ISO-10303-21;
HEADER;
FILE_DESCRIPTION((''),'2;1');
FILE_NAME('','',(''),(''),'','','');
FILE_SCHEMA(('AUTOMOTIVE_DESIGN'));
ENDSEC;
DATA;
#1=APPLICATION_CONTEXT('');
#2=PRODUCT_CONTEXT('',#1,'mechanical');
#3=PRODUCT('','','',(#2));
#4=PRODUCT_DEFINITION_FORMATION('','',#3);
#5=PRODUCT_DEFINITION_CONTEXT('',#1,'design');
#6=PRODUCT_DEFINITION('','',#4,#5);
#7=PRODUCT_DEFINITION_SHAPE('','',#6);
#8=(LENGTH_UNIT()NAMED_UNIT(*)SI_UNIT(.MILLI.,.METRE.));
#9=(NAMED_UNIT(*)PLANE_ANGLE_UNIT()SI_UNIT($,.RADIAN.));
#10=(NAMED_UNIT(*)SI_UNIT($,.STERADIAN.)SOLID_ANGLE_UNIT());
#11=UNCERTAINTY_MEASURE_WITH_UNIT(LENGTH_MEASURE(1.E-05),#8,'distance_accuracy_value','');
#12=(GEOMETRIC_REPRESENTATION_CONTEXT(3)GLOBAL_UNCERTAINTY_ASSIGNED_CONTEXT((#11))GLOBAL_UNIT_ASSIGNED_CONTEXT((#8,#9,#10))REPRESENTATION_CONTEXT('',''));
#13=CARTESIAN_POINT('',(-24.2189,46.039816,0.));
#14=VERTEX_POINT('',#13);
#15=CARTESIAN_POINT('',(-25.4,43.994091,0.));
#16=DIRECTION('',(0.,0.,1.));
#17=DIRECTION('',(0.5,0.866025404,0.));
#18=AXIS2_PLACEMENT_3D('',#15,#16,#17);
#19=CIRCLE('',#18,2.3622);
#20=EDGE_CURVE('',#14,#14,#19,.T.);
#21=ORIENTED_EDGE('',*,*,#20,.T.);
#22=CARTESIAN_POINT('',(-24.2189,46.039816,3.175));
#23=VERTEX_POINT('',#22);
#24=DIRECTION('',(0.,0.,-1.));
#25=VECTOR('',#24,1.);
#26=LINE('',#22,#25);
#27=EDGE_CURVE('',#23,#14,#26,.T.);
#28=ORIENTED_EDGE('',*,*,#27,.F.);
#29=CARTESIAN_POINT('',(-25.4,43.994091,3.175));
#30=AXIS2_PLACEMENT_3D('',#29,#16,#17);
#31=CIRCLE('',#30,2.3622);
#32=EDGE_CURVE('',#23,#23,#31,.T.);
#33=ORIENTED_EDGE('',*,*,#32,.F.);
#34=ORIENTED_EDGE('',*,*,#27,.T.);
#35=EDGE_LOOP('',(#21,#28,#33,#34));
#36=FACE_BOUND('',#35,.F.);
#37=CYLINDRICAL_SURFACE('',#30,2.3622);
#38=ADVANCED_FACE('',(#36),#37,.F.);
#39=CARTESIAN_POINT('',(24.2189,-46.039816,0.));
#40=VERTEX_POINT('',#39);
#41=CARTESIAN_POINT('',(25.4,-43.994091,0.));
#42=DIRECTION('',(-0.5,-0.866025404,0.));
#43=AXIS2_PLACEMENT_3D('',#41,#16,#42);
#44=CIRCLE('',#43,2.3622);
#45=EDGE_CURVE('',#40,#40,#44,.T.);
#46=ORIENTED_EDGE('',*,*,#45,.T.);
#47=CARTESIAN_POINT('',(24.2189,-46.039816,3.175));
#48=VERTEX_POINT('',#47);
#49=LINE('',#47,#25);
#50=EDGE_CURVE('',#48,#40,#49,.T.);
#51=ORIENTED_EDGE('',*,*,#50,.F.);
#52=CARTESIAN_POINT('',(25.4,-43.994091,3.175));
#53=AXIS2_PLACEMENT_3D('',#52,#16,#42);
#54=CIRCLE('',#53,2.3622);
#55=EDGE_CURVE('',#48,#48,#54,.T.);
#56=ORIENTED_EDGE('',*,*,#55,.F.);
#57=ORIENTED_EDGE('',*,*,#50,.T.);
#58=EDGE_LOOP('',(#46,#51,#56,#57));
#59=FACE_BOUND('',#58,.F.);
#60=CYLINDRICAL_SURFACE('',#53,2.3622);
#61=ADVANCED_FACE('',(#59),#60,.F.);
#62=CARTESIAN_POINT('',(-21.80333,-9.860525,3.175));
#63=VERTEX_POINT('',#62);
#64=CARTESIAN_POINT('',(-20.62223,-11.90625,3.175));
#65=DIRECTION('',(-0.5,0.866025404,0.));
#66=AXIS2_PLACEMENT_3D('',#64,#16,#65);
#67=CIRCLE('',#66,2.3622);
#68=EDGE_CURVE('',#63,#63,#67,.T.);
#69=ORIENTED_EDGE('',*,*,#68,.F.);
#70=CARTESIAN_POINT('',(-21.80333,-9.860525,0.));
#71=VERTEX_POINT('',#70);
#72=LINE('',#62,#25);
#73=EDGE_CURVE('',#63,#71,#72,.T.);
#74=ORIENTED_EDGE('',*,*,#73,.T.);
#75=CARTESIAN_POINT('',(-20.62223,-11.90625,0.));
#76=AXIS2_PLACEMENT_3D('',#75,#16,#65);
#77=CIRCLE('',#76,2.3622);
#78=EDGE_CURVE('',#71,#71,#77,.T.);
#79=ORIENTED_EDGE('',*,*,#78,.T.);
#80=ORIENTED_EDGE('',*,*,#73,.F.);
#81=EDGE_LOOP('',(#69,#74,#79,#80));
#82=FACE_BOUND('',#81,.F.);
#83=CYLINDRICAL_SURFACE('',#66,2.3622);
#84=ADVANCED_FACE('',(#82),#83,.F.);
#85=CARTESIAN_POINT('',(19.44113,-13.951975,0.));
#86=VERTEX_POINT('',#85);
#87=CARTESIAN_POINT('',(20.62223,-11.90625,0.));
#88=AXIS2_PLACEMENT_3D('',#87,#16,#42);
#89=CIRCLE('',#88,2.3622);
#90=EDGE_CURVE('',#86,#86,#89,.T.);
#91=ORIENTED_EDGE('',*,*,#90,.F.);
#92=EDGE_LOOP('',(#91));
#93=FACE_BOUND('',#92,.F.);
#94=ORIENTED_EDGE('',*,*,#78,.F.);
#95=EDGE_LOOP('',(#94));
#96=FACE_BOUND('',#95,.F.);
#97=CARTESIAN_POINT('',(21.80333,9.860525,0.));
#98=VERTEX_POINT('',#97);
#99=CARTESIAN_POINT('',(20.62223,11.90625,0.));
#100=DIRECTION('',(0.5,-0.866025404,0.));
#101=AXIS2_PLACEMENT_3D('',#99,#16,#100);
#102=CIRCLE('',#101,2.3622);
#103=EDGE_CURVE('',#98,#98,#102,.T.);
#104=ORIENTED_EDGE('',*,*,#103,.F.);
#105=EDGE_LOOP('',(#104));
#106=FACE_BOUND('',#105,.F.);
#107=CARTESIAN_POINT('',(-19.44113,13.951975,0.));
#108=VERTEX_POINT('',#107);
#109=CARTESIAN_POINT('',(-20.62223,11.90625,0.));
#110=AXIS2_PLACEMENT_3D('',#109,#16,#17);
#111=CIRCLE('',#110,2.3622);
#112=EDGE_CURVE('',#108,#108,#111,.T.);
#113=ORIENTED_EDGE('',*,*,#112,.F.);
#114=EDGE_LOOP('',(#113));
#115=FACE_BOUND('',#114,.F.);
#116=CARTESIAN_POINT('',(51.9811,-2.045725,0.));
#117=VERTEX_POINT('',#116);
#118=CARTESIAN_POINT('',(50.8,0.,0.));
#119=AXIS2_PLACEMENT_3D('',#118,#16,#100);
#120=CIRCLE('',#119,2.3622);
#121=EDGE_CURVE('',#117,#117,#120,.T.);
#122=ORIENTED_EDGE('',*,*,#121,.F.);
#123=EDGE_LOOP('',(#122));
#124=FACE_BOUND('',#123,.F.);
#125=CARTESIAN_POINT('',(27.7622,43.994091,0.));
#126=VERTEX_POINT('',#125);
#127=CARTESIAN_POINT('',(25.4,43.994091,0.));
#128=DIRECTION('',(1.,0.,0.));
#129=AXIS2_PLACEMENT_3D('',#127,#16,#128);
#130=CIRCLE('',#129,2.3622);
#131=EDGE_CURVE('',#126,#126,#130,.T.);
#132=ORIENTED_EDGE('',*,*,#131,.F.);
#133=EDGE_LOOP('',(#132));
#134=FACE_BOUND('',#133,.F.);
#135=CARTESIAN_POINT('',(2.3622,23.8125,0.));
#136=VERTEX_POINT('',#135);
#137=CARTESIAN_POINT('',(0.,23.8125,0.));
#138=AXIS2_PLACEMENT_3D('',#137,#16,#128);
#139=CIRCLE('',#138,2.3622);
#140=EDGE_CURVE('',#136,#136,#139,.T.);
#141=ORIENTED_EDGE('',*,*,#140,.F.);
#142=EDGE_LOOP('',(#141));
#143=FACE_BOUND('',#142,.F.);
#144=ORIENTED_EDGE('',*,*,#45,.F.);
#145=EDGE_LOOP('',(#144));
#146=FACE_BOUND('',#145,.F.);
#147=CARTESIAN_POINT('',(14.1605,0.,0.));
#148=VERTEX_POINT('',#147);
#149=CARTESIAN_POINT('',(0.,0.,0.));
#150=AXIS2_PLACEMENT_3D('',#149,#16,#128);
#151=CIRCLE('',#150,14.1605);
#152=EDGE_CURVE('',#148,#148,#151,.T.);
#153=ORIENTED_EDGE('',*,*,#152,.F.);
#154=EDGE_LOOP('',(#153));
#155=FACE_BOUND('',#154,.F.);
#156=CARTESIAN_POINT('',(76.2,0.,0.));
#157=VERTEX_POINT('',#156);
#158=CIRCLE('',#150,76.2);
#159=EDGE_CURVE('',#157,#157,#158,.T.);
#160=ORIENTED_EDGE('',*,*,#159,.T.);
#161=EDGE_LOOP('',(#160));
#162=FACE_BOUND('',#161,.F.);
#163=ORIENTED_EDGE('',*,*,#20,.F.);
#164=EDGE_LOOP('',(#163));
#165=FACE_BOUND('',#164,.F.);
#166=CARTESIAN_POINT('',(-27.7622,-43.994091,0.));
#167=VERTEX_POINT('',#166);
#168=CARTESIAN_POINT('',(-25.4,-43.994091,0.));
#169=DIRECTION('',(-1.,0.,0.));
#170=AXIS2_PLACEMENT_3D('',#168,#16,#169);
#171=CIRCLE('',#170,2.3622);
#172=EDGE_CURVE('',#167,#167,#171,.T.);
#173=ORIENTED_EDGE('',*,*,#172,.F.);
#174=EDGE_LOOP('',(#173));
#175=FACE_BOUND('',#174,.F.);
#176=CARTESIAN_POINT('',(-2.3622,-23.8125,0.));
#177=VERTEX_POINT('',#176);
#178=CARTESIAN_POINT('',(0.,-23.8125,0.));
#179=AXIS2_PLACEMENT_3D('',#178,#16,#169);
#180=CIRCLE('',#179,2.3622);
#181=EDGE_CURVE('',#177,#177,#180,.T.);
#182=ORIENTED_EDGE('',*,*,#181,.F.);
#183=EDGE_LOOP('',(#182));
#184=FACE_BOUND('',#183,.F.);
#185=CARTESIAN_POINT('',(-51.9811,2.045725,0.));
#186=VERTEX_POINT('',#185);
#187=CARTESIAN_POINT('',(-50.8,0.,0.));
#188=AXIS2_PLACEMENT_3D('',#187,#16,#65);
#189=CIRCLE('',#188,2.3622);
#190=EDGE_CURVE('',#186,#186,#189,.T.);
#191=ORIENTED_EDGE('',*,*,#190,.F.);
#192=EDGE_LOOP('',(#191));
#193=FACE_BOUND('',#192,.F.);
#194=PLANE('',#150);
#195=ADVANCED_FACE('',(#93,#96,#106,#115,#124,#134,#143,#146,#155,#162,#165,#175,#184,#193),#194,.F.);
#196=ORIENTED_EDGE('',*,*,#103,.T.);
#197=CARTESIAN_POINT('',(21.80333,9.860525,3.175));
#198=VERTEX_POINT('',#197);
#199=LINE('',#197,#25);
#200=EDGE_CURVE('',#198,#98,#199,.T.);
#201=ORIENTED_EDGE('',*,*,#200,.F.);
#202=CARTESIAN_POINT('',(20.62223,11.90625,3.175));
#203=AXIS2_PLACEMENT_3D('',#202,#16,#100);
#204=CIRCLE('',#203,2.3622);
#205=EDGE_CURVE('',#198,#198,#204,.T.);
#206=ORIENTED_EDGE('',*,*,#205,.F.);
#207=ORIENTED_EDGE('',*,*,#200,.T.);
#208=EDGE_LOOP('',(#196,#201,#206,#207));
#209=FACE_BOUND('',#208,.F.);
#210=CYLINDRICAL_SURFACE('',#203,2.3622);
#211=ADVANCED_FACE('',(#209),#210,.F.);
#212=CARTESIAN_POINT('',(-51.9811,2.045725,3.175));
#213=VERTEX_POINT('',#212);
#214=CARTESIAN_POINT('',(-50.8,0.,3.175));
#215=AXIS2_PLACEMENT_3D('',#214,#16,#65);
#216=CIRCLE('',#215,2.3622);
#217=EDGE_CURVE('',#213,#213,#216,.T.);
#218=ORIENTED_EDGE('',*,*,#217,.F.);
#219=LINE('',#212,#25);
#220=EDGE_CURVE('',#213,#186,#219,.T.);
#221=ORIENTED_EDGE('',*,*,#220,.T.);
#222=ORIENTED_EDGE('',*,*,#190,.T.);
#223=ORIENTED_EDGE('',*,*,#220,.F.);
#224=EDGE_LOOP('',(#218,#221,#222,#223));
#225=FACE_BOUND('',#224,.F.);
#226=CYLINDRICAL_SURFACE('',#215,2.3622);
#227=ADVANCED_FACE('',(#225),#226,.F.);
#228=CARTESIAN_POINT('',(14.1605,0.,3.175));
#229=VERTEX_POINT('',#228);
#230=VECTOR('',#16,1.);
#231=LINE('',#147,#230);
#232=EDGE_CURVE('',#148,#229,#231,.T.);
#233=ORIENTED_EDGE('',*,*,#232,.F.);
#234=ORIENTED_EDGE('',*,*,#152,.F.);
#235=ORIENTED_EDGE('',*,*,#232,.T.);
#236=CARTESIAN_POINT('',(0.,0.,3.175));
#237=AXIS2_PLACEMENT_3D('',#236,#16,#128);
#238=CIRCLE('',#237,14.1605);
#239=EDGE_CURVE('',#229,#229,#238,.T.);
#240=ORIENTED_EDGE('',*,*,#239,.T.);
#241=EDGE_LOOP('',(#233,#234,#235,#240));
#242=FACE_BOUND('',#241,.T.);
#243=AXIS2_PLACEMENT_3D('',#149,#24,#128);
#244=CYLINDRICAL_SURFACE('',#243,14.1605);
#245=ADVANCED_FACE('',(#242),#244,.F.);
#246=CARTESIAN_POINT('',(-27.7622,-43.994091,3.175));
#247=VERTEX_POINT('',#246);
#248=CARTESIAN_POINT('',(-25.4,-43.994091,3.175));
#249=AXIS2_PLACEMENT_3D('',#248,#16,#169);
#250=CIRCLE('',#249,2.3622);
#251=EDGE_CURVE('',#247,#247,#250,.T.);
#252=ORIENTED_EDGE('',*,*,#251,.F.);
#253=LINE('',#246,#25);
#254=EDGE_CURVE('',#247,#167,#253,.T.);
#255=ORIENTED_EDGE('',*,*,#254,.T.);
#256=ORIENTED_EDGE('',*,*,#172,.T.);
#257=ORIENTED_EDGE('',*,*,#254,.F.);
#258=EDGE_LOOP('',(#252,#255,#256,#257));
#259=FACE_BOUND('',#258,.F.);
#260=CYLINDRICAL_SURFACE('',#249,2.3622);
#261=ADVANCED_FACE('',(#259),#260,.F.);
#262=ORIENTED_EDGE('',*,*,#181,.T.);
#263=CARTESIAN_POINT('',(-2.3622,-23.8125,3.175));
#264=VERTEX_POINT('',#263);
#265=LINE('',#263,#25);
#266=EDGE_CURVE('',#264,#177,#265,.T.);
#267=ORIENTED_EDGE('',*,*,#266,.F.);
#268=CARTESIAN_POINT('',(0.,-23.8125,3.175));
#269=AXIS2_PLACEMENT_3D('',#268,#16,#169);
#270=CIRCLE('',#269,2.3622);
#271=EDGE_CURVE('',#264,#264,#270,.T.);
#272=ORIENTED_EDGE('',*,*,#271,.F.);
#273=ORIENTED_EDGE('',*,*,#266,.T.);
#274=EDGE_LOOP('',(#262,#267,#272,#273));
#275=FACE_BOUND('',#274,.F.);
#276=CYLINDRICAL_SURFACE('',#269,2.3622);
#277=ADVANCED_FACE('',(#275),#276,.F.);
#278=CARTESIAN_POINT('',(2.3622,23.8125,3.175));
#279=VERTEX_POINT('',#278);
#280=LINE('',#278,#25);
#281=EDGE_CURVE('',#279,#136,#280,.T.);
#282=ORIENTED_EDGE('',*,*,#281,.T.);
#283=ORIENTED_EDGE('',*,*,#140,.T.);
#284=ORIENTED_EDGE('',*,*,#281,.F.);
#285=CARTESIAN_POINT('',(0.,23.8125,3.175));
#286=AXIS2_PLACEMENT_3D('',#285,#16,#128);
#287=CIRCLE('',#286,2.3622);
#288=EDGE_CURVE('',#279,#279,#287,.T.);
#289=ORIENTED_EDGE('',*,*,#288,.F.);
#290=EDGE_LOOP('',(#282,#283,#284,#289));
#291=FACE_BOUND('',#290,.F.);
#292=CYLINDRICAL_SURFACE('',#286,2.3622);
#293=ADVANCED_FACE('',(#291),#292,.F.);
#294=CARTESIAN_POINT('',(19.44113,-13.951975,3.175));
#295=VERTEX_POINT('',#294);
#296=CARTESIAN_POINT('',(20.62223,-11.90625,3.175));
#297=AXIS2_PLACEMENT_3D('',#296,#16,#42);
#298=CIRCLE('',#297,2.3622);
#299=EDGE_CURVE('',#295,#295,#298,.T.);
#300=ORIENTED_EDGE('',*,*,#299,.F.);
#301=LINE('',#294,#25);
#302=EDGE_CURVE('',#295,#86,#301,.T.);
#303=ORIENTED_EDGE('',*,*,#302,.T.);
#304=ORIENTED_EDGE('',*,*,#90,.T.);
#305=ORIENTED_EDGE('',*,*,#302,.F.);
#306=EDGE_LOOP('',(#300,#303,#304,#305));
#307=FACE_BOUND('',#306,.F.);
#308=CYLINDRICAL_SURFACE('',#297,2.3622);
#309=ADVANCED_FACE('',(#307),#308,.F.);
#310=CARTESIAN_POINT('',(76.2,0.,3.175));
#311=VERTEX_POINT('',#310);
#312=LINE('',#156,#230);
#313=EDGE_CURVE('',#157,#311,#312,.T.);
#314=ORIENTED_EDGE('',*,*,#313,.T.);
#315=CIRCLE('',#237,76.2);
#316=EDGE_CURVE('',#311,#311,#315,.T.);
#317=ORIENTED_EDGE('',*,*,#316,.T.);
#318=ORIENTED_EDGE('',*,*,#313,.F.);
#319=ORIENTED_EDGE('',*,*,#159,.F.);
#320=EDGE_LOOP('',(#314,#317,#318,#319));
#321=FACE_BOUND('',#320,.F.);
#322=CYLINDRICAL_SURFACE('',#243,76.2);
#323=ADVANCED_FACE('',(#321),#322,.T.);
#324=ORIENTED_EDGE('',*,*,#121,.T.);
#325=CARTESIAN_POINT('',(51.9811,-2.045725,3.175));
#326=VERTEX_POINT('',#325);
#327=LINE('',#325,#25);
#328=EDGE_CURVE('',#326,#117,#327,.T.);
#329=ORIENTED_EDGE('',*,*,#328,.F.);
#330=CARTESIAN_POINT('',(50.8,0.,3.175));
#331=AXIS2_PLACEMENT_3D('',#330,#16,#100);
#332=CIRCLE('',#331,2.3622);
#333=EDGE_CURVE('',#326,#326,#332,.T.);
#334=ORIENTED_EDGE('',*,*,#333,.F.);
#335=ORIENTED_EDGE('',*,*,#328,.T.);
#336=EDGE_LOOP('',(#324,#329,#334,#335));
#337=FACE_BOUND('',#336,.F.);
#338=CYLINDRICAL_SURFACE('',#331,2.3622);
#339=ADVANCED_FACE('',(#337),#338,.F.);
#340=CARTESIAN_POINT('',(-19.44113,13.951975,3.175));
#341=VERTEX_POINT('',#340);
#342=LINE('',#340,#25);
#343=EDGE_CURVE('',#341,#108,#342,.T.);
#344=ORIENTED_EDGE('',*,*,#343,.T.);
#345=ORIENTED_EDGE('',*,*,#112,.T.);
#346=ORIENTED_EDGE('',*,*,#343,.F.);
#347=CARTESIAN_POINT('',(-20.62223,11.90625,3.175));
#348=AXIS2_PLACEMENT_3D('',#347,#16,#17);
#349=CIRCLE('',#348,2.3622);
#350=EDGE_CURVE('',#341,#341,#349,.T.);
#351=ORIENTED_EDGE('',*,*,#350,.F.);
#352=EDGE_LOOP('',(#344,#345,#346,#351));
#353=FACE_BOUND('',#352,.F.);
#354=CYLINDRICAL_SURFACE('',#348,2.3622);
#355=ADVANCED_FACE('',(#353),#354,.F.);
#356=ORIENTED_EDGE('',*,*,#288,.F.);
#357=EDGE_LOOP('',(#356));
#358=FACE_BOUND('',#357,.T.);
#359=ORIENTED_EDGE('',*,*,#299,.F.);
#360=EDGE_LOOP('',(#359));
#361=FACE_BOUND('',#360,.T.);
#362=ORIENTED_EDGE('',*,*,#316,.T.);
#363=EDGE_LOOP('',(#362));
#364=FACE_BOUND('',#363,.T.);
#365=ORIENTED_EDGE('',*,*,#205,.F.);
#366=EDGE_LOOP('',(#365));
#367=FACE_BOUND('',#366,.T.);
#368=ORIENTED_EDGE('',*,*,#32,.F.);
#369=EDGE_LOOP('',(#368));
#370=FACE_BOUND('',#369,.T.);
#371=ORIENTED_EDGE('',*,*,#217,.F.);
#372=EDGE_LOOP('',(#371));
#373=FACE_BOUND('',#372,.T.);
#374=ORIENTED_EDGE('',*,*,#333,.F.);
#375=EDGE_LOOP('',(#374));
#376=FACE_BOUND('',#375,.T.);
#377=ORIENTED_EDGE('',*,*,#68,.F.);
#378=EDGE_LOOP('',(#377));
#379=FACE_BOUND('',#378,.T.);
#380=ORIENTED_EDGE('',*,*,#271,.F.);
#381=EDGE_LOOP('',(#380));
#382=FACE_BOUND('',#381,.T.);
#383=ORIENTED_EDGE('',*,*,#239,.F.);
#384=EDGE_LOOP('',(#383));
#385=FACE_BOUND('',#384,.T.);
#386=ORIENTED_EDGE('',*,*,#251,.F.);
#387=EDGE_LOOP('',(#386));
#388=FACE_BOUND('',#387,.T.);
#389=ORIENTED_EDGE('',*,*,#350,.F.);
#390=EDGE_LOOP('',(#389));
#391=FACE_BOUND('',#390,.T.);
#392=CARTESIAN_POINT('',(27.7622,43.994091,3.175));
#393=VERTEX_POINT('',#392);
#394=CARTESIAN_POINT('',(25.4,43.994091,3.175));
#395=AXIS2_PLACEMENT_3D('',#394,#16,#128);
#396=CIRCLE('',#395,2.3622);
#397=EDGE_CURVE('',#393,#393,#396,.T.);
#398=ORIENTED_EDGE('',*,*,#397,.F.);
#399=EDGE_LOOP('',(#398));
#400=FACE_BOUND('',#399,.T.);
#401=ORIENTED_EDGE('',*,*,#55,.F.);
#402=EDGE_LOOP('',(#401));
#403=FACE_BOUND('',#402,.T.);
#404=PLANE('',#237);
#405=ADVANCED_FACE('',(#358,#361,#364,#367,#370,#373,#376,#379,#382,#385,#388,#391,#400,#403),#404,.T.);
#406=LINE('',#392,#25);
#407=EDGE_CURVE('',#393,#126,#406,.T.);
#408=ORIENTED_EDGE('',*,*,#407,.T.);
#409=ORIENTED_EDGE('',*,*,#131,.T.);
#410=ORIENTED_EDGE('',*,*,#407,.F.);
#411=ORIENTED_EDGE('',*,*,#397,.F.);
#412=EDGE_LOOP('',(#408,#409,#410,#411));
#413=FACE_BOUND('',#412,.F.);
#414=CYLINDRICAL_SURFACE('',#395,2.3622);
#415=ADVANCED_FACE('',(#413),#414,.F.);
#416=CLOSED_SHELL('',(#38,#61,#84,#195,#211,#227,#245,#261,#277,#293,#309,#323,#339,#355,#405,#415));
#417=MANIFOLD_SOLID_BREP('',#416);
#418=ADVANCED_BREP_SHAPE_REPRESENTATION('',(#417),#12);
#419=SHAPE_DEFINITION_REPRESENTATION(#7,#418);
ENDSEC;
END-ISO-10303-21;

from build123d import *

# Parameters (mm, degrees)
F0_R            = 76.2
F0_R_2          = 14.1605
F1_DEPTH        = 3.175
F2_R            = 2.3622
F3_DEPTH        = 3.176
F3_COPIES_COUNT = 6


# Not quite as in the source:
# - a pattern or mirror of a feature is missing from the dataset's text; its kind, count and spacing are read off the source's solid


with BuildPart() as f1:
    # F0 (on Top) → F1 (new body)
    with BuildSketch(Plane.XY):
        Circle(F0_R)
        Circle(F0_R_2, mode=Mode.SUBTRACT)
    extrude(amount=F1_DEPTH)

    # F2 (on face) → F3 (cut, through all)
    with BuildSketch(Plane.XY.offset(3.175)):
        with Locations((0, 23.8125)):
            Circle(F2_R)
        with Locations((25.4, 43.9940905122)):
            Circle(F2_R)
    f3 = extrude(amount=-F3_DEPTH, mode=Mode.SUBTRACT)

    # F3_copies: F3 ×6 about axis
    f3_copies_axis = Axis((0, 0, 0), (0, 0, 1))
    for i in range(1, F3_COPIES_COUNT):
        add(f3.rotate(f3_copies_axis, i * 360 / F3_COPIES_COUNT), mode=Mode.SUBTRACT)


solid = f1.part
